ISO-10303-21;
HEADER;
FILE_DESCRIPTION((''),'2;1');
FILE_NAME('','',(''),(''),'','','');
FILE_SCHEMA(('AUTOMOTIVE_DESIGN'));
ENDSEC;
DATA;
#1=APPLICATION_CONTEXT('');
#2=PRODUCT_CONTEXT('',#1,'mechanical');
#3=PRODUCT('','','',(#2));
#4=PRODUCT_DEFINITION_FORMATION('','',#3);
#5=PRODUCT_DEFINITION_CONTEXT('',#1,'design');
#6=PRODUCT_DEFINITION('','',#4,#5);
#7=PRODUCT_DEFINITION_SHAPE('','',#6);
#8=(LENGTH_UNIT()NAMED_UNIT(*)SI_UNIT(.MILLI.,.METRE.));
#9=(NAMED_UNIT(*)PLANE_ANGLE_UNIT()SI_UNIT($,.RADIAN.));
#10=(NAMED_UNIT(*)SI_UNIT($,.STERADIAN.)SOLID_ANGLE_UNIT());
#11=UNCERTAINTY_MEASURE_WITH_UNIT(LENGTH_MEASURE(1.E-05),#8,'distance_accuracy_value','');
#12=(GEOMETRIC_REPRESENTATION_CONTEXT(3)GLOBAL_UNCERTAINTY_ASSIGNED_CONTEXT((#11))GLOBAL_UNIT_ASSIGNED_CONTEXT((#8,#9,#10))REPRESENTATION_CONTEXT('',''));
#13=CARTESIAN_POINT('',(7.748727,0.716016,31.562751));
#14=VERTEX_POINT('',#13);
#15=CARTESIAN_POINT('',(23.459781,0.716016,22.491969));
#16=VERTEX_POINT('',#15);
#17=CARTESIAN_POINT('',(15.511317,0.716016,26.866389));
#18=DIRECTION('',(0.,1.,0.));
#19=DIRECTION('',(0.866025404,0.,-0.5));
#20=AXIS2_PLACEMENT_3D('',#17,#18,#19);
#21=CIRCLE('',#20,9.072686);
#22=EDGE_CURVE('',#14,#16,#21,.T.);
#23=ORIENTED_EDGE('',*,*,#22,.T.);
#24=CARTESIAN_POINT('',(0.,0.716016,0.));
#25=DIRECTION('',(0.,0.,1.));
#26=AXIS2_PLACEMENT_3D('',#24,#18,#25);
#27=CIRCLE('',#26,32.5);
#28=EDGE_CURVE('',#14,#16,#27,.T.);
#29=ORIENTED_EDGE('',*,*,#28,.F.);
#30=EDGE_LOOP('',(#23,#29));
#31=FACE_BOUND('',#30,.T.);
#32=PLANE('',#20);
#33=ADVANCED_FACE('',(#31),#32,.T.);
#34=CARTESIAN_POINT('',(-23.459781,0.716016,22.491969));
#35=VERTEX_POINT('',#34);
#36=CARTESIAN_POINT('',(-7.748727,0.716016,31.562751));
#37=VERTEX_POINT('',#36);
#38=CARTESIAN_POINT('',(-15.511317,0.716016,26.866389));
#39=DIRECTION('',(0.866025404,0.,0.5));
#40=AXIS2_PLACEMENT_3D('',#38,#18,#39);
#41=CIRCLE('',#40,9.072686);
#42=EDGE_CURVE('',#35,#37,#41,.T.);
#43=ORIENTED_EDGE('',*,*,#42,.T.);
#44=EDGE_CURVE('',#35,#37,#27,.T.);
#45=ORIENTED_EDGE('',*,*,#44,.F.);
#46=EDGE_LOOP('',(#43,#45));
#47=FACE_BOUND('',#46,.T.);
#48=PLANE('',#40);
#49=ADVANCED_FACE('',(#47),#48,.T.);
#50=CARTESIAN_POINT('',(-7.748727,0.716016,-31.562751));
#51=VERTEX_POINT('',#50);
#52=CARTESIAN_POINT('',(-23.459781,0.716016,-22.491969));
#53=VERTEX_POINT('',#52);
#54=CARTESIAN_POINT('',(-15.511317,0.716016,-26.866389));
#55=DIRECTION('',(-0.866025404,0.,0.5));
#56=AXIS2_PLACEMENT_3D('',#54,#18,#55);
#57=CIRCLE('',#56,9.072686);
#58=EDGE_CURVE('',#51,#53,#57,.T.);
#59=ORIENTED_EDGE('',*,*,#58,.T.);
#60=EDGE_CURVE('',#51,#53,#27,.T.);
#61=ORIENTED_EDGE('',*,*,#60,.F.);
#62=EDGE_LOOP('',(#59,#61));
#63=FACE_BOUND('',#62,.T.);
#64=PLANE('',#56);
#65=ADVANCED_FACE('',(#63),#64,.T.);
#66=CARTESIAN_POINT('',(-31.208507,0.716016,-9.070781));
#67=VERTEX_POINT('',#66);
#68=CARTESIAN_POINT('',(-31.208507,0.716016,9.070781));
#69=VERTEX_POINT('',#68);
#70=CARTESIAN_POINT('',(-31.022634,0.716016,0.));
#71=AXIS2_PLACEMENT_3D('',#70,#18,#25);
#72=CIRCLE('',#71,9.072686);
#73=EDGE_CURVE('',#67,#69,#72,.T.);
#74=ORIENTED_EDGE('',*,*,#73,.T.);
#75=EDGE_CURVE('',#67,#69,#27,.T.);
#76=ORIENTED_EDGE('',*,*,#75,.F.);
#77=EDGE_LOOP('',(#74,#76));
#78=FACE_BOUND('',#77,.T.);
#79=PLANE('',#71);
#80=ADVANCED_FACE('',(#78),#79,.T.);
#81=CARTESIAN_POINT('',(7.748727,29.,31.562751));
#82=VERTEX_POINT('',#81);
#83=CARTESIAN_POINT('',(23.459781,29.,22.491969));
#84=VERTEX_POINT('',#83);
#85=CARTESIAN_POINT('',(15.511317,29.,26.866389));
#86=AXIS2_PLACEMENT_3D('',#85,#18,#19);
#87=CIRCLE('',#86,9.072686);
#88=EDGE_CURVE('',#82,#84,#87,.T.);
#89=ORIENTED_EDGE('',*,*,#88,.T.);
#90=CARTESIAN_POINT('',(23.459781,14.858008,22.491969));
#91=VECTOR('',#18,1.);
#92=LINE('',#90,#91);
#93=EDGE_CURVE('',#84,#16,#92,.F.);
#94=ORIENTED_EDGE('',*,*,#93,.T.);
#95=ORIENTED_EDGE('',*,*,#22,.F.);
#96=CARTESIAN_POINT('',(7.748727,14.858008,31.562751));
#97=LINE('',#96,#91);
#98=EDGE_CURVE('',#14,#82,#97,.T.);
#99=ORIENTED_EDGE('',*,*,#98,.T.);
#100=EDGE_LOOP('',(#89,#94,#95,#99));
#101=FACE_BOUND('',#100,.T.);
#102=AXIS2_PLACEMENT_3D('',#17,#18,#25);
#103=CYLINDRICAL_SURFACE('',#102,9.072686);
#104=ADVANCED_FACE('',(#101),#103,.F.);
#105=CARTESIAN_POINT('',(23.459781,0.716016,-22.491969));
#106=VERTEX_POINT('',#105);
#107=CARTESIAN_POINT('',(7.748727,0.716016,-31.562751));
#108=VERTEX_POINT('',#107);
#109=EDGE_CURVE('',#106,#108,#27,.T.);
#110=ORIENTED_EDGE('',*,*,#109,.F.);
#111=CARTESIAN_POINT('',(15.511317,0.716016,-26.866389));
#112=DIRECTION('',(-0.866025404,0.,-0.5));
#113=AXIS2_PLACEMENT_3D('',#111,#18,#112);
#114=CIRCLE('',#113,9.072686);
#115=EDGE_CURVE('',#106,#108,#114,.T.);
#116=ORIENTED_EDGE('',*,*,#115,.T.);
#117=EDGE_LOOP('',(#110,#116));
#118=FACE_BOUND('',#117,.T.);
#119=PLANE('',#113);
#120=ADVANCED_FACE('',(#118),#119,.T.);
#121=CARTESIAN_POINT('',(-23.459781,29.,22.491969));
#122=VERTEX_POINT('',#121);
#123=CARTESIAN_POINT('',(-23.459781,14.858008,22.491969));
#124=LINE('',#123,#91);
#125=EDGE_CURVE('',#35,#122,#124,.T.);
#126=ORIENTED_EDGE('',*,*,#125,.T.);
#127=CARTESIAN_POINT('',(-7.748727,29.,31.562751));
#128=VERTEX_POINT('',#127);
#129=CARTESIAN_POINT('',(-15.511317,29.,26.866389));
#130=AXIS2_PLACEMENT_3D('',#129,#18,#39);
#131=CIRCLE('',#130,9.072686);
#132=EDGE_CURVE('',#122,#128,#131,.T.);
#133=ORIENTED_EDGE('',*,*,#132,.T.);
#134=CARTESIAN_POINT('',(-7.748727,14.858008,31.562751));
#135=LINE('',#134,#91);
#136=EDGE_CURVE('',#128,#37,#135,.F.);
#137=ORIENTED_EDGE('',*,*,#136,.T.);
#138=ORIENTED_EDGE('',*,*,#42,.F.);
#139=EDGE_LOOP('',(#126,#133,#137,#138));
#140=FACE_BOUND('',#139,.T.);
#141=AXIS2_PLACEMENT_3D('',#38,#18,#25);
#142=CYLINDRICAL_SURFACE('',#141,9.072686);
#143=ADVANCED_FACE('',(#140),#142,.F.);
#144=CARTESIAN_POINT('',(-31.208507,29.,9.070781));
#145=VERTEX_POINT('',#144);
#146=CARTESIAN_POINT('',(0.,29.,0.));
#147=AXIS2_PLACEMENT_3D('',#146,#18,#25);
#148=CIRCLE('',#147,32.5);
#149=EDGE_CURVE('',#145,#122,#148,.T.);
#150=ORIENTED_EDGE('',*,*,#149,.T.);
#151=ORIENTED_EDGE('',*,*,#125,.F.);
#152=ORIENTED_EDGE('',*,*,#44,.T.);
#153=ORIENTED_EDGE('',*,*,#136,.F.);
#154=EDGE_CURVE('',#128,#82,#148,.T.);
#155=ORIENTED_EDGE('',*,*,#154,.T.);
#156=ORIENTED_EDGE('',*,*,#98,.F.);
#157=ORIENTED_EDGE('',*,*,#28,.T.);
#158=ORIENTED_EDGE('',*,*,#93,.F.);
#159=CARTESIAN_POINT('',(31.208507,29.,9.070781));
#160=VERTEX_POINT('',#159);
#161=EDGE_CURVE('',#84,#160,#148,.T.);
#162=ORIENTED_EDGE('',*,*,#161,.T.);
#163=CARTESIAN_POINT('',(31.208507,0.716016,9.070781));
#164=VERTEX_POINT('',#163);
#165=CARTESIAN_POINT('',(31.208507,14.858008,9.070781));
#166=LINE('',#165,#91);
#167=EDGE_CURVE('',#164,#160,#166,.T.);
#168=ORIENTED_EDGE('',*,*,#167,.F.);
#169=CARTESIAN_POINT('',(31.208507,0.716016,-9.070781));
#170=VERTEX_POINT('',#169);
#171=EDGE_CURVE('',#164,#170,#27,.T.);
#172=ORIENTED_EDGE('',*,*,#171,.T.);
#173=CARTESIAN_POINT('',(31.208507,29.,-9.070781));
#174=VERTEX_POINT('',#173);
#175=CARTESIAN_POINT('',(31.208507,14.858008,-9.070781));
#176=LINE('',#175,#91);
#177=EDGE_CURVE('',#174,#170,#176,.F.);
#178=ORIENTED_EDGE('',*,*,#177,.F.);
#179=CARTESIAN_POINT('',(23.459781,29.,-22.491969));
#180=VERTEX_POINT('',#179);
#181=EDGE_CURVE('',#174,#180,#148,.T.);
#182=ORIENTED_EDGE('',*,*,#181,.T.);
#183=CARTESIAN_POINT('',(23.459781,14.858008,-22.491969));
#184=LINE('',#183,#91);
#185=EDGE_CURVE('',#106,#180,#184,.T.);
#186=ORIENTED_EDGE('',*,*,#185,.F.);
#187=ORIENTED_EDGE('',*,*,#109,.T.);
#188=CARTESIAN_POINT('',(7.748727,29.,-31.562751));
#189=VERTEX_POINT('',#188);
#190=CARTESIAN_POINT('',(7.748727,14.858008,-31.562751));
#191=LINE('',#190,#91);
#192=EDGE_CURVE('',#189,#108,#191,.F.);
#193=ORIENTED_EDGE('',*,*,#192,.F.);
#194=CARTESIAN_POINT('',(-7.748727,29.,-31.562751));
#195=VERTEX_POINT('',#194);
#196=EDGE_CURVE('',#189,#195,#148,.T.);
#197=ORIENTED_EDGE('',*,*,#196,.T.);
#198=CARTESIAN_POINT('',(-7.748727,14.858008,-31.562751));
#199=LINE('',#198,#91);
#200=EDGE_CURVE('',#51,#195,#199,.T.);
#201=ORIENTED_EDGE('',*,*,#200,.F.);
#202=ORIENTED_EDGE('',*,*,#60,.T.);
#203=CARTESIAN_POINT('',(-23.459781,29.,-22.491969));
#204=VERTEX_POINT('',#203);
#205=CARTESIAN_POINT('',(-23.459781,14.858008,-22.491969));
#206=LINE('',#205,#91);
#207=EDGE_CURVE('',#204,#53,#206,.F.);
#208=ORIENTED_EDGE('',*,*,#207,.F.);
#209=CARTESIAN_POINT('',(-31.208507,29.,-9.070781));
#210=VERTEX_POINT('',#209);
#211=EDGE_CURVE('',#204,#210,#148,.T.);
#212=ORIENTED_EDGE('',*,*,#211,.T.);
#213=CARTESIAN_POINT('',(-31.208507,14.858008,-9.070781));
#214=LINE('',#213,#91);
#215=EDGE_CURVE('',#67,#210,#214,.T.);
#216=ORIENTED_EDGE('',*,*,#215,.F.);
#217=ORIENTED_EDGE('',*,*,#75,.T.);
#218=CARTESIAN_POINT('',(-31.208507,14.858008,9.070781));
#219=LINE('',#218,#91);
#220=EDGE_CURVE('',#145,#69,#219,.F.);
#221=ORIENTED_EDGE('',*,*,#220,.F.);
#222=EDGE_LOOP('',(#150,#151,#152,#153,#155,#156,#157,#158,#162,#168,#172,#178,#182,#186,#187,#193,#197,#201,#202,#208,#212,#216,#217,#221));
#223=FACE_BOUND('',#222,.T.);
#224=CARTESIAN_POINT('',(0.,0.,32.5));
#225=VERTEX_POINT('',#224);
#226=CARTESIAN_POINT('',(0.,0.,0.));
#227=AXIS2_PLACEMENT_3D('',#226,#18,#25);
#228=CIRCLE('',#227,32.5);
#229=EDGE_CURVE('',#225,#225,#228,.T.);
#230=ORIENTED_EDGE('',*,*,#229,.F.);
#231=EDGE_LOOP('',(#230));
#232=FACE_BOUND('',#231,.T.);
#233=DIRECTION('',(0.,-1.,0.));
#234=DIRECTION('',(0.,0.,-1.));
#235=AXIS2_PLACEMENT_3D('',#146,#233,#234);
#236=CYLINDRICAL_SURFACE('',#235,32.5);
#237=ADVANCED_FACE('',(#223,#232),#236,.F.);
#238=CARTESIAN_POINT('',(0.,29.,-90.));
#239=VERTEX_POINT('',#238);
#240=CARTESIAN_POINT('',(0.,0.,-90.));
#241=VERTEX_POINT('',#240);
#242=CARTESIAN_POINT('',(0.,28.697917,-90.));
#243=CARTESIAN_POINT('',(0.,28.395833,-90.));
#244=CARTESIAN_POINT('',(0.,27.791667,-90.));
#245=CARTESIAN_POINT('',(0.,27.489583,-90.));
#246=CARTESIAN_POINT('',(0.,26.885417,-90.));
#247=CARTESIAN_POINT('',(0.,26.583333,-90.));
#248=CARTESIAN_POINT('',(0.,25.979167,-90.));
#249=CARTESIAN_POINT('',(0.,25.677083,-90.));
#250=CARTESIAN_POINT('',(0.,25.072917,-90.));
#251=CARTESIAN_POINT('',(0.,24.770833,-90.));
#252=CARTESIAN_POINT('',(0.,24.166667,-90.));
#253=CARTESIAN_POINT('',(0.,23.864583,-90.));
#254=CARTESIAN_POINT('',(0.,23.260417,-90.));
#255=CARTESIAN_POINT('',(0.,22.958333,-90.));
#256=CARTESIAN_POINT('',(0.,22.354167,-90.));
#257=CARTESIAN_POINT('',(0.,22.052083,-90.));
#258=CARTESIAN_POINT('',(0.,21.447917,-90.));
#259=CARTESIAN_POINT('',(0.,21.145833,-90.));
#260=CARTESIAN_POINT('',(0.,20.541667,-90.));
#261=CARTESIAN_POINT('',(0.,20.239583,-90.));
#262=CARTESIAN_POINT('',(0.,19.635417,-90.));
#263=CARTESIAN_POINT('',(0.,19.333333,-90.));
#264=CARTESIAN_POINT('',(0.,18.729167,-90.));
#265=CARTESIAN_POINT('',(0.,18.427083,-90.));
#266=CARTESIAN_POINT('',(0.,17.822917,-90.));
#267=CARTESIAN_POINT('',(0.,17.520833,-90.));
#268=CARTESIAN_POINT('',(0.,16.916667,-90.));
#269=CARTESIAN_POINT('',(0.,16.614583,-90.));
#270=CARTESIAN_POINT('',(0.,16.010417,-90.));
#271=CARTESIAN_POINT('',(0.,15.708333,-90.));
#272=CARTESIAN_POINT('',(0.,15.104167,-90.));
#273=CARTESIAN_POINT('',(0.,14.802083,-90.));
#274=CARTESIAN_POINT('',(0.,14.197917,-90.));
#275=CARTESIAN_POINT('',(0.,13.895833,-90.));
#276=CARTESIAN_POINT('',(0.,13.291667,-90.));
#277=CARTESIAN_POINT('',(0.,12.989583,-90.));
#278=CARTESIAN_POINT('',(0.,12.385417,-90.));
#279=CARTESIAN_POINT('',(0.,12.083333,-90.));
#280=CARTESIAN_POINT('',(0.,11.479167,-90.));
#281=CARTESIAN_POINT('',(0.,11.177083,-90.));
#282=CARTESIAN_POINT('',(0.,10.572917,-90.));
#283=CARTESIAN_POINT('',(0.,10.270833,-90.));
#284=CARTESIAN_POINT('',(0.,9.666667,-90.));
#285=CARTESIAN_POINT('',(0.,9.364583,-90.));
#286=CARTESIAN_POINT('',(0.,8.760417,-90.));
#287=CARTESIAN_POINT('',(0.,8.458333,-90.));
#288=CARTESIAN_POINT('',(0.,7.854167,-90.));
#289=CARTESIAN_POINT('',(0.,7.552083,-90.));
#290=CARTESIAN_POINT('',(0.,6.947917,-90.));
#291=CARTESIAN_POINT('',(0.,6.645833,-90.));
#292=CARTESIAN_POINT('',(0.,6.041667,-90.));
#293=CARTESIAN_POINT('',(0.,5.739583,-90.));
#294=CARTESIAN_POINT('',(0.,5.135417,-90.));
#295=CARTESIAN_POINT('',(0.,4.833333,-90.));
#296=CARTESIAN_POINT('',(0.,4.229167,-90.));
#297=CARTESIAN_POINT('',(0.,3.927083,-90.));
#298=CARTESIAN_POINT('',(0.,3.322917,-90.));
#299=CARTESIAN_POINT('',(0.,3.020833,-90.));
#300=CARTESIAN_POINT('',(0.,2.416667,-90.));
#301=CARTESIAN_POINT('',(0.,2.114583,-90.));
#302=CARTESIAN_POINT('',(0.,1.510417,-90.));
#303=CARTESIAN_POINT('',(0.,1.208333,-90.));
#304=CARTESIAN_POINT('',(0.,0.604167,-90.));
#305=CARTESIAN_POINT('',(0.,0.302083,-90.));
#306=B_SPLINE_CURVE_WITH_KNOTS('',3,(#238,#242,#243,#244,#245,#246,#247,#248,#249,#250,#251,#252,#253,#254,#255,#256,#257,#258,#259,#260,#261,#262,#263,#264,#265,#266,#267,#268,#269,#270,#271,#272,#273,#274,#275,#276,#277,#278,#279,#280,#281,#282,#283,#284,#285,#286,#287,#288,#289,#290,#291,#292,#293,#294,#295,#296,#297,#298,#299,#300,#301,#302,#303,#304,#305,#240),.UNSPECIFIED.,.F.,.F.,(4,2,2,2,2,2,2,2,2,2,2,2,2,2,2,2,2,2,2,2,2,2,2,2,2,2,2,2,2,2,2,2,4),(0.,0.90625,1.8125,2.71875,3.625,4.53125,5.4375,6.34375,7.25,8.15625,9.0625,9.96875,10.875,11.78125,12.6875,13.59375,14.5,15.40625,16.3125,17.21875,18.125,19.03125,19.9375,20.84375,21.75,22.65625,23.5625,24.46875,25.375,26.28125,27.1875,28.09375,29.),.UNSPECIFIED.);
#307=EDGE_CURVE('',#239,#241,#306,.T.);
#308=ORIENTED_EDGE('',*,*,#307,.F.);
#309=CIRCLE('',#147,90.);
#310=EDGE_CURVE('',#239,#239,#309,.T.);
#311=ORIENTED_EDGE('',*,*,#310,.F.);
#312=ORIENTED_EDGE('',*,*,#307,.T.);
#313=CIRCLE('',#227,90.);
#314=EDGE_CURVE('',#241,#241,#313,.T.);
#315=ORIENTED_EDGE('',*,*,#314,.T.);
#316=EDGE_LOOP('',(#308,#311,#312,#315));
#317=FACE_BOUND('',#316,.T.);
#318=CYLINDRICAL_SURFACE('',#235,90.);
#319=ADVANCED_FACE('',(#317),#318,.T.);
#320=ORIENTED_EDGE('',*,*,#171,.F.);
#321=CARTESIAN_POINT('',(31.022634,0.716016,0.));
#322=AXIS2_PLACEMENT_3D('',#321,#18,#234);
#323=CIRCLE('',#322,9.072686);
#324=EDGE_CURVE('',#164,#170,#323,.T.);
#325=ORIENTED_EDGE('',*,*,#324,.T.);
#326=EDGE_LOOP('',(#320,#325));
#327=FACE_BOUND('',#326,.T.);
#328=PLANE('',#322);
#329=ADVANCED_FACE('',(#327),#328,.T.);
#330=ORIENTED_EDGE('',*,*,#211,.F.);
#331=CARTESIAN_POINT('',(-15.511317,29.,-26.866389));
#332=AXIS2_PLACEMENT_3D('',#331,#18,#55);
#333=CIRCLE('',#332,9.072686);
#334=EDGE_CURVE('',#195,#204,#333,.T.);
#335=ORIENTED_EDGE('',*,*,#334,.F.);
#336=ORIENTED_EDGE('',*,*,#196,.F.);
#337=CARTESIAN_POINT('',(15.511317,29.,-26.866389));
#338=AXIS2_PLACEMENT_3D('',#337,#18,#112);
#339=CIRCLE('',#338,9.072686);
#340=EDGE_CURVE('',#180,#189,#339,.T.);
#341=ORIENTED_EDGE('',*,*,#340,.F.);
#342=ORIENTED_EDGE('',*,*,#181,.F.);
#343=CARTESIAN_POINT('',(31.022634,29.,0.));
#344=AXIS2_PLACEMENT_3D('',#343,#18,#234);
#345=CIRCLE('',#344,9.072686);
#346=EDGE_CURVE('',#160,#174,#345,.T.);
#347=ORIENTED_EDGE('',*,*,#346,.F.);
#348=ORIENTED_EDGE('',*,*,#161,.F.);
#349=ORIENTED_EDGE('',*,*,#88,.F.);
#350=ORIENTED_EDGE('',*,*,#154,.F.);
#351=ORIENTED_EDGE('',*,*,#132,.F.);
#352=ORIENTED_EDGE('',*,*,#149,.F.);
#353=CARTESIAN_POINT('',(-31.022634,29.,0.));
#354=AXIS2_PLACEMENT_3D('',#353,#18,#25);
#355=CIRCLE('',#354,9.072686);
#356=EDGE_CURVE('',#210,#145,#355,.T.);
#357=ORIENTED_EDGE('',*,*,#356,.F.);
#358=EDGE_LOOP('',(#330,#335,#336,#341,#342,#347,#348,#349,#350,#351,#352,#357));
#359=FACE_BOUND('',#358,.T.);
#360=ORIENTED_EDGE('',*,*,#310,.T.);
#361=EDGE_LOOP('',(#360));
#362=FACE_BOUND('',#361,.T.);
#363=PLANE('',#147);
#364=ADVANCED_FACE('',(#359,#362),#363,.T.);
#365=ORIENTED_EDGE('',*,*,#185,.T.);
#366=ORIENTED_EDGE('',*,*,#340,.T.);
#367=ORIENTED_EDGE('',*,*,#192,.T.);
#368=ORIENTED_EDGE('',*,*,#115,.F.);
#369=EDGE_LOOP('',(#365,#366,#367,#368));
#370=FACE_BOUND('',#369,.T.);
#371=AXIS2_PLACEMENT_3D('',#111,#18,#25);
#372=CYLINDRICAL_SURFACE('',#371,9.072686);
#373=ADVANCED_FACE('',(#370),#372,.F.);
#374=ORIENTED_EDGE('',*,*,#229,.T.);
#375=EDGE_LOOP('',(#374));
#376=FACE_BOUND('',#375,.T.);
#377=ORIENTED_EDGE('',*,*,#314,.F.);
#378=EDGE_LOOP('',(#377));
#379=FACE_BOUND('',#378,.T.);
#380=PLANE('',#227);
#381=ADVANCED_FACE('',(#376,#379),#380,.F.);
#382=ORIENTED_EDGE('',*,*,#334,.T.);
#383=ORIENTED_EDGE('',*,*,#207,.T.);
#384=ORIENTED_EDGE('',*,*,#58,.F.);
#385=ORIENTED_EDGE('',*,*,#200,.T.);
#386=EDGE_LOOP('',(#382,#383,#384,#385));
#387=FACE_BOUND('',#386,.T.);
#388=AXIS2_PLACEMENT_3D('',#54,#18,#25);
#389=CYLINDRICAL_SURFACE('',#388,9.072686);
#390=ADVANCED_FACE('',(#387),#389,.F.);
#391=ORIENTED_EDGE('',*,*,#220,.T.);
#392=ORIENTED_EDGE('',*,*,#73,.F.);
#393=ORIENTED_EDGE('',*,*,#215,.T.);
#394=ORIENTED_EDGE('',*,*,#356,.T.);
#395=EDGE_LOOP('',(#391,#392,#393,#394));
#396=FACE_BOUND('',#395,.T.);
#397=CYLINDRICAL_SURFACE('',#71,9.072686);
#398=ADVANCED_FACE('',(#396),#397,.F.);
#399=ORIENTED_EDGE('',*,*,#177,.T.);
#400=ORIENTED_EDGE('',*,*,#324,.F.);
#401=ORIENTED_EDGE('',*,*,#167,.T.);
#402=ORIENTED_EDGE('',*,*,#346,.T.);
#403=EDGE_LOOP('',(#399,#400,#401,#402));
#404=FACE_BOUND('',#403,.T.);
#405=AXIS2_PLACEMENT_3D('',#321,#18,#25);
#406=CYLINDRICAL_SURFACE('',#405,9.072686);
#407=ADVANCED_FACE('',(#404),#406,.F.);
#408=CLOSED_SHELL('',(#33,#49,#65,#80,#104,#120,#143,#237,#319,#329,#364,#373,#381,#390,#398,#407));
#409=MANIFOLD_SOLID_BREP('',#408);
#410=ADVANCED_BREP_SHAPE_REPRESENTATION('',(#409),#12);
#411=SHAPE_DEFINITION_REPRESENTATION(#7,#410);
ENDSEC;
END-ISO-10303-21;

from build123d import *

# Parameters (mm, degrees)
SKETCH1_R           = 90
BOSS_EXTRUDE1_DEPTH = 29
SKETCH2_R           = 32.5
CUT_EXTRUDE1_DEPTH  = 131.541181242
SKETCH3_R           = 9.072685536
CUT_EXTRUDE2_DEPTH  = 28.283983698
CIRPATTERN1_COUNT   = 6


with BuildPart() as part:
    # Sketch1 → Boss-Extrude1 (new body)
    with BuildSketch(Plane(origin=(0, 0, 0), x_dir=(1, 0, 0), z_dir=(0, 1, 0))):
        Circle(SKETCH1_R)
    extrude(amount=BOSS_EXTRUDE1_DEPTH)

    # Sketch2 → Cut-Extrude1 (cut, through all)
    with BuildSketch(Plane(origin=(0, 0, 0), x_dir=(1, 0, 0), z_dir=(0, 1, 0))):
        Circle(SKETCH2_R)
    extrude(amount=CUT_EXTRUDE1_DEPTH, mode=Mode.SUBTRACT)

    # Sketch3 → Cut-Extrude2 (cut)
    with BuildSketch(Plane(origin=(0, 29, 0), x_dir=(1, 0, 0), z_dir=(0, 1, 0))):
        with Locations((-31.022634269, 0)):
            Circle(SKETCH3_R)
    cut_extrude2 = extrude(amount=-CUT_EXTRUDE2_DEPTH, mode=Mode.SUBTRACT)

    # CirPattern1: Cut-Extrude2 ×6 about axis
    cirpattern1_axis = Axis((0, 0, 0), (0, 1, 0))
    for i in range(1, CIRPATTERN1_COUNT):
        add(cut_extrude2.rotate(cirpattern1_axis, i * 360 / CIRPATTERN1_COUNT), mode=Mode.SUBTRACT)


solid = part.part
